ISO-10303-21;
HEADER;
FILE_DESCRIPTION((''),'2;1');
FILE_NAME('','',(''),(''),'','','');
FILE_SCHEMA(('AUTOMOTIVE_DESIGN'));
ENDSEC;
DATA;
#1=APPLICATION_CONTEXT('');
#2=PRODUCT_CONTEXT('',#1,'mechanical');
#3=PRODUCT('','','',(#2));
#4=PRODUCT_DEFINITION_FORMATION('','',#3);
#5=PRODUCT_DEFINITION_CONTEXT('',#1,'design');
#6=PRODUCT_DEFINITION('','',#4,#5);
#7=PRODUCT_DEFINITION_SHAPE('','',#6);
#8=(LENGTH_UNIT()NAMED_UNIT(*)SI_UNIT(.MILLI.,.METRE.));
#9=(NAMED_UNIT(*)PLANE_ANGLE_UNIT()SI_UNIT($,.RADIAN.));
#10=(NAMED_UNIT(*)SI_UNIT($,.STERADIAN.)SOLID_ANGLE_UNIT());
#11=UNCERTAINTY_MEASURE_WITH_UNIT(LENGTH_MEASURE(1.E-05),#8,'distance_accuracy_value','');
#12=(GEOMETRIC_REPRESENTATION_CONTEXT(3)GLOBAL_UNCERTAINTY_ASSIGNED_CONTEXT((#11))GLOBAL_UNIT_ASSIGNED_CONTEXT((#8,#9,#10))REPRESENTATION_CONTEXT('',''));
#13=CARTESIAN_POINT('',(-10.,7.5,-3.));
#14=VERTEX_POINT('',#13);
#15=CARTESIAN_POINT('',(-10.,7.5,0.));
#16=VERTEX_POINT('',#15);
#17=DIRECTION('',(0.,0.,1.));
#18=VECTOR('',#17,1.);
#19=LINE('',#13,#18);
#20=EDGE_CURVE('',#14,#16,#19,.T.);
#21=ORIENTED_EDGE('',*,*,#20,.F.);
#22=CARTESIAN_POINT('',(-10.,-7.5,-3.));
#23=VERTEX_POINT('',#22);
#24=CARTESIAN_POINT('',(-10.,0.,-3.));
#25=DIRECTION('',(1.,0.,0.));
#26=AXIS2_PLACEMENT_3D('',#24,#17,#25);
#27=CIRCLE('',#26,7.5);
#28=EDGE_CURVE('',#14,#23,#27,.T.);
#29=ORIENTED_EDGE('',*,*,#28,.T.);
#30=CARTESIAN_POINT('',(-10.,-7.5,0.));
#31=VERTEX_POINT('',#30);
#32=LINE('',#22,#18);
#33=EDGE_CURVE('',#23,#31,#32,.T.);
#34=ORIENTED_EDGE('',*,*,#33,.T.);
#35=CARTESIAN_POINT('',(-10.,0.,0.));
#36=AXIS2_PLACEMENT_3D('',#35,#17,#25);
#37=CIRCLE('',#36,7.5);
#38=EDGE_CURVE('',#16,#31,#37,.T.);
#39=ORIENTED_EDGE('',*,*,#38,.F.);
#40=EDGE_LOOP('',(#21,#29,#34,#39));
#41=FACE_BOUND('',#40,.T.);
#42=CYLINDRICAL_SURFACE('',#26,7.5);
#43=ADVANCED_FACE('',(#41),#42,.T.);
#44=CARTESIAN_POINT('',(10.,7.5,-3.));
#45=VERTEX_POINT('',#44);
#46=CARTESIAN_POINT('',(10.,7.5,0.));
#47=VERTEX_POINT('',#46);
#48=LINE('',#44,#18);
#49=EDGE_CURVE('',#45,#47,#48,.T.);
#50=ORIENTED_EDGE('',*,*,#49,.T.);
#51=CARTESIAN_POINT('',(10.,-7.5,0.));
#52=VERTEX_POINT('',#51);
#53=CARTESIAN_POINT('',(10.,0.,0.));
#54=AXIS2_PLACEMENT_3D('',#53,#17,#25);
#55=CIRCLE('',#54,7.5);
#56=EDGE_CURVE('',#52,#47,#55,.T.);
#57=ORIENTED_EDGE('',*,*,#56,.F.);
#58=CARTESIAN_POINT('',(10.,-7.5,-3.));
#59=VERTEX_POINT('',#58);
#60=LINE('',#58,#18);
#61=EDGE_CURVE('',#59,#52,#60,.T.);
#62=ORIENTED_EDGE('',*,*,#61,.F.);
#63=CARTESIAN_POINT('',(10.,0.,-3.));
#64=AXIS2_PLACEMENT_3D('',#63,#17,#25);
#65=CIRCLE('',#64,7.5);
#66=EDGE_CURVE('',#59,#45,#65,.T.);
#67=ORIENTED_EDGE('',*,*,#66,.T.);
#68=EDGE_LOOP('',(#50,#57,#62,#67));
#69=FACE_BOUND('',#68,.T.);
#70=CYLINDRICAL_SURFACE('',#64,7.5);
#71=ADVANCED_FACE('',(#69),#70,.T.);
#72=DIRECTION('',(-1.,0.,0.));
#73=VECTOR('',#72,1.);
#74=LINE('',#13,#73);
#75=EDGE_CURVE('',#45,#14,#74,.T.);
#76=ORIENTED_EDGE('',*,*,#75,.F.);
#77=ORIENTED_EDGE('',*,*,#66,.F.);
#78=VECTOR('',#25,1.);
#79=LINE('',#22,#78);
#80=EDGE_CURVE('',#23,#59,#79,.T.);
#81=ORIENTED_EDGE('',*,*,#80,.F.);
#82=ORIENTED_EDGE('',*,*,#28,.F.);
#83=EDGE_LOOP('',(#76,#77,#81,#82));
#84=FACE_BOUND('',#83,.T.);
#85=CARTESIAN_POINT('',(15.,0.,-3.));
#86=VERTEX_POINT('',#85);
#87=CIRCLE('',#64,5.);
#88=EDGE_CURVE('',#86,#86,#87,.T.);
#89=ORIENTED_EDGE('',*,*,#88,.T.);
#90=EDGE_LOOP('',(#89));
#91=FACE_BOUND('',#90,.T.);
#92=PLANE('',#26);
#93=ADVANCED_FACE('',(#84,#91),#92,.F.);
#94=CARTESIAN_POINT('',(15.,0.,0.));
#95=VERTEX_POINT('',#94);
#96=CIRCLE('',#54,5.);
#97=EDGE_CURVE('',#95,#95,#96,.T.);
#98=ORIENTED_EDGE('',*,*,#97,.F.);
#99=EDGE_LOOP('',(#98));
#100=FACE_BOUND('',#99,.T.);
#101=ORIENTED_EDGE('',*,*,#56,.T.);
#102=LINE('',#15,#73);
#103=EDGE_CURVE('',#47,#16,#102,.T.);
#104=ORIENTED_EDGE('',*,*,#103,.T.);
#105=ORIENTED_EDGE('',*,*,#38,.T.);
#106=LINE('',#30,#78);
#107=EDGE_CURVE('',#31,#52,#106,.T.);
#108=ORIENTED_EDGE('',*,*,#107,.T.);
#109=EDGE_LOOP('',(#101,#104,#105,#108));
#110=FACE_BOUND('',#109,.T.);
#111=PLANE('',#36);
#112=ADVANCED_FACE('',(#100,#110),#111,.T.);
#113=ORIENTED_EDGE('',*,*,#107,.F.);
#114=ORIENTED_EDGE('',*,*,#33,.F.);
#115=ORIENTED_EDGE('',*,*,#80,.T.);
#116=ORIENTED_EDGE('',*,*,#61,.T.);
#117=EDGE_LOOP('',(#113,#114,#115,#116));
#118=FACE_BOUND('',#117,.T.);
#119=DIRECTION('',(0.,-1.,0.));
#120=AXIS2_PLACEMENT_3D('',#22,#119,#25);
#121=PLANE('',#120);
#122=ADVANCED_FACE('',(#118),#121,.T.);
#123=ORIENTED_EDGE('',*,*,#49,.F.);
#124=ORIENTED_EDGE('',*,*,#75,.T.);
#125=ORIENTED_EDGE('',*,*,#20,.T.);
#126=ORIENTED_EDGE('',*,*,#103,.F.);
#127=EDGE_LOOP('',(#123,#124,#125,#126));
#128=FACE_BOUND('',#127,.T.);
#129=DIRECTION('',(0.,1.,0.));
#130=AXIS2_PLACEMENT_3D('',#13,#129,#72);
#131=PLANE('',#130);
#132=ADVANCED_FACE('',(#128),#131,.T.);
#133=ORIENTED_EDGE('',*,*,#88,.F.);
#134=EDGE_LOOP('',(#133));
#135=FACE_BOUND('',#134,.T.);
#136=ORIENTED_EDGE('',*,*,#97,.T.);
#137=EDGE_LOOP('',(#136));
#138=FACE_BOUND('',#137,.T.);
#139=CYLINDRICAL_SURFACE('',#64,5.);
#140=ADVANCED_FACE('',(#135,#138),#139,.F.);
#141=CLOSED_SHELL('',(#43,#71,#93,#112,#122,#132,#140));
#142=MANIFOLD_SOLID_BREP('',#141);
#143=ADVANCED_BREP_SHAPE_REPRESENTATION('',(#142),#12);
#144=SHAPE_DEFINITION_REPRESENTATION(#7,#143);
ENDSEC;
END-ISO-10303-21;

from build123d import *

# Parameters (mm, degrees)
SKETCH1_R          = 5
BASE_FLANGE1_DEPTH = 3


# Sheet-metal steps are written as plain solids
with BuildPart() as part:
    # Sketch1 → Base-Flange1 (new body)
    with BuildSketch(Plane.XY):
        with BuildLine():
            Line((-10, 7.5), (10, 7.5))
            ThreePointArc((10, 7.5), (17.5, 0), (10, -7.5))
            Line((10, -7.5), (-10, -7.5))
            ThreePointArc((-10, -7.5), (-17.5, 0), (-10, 7.5))
        make_face()
        with Locations((10, 0)):
            Circle(SKETCH1_R, mode=Mode.SUBTRACT)
    extrude(amount=-BASE_FLANGE1_DEPTH)


solid = part.part
